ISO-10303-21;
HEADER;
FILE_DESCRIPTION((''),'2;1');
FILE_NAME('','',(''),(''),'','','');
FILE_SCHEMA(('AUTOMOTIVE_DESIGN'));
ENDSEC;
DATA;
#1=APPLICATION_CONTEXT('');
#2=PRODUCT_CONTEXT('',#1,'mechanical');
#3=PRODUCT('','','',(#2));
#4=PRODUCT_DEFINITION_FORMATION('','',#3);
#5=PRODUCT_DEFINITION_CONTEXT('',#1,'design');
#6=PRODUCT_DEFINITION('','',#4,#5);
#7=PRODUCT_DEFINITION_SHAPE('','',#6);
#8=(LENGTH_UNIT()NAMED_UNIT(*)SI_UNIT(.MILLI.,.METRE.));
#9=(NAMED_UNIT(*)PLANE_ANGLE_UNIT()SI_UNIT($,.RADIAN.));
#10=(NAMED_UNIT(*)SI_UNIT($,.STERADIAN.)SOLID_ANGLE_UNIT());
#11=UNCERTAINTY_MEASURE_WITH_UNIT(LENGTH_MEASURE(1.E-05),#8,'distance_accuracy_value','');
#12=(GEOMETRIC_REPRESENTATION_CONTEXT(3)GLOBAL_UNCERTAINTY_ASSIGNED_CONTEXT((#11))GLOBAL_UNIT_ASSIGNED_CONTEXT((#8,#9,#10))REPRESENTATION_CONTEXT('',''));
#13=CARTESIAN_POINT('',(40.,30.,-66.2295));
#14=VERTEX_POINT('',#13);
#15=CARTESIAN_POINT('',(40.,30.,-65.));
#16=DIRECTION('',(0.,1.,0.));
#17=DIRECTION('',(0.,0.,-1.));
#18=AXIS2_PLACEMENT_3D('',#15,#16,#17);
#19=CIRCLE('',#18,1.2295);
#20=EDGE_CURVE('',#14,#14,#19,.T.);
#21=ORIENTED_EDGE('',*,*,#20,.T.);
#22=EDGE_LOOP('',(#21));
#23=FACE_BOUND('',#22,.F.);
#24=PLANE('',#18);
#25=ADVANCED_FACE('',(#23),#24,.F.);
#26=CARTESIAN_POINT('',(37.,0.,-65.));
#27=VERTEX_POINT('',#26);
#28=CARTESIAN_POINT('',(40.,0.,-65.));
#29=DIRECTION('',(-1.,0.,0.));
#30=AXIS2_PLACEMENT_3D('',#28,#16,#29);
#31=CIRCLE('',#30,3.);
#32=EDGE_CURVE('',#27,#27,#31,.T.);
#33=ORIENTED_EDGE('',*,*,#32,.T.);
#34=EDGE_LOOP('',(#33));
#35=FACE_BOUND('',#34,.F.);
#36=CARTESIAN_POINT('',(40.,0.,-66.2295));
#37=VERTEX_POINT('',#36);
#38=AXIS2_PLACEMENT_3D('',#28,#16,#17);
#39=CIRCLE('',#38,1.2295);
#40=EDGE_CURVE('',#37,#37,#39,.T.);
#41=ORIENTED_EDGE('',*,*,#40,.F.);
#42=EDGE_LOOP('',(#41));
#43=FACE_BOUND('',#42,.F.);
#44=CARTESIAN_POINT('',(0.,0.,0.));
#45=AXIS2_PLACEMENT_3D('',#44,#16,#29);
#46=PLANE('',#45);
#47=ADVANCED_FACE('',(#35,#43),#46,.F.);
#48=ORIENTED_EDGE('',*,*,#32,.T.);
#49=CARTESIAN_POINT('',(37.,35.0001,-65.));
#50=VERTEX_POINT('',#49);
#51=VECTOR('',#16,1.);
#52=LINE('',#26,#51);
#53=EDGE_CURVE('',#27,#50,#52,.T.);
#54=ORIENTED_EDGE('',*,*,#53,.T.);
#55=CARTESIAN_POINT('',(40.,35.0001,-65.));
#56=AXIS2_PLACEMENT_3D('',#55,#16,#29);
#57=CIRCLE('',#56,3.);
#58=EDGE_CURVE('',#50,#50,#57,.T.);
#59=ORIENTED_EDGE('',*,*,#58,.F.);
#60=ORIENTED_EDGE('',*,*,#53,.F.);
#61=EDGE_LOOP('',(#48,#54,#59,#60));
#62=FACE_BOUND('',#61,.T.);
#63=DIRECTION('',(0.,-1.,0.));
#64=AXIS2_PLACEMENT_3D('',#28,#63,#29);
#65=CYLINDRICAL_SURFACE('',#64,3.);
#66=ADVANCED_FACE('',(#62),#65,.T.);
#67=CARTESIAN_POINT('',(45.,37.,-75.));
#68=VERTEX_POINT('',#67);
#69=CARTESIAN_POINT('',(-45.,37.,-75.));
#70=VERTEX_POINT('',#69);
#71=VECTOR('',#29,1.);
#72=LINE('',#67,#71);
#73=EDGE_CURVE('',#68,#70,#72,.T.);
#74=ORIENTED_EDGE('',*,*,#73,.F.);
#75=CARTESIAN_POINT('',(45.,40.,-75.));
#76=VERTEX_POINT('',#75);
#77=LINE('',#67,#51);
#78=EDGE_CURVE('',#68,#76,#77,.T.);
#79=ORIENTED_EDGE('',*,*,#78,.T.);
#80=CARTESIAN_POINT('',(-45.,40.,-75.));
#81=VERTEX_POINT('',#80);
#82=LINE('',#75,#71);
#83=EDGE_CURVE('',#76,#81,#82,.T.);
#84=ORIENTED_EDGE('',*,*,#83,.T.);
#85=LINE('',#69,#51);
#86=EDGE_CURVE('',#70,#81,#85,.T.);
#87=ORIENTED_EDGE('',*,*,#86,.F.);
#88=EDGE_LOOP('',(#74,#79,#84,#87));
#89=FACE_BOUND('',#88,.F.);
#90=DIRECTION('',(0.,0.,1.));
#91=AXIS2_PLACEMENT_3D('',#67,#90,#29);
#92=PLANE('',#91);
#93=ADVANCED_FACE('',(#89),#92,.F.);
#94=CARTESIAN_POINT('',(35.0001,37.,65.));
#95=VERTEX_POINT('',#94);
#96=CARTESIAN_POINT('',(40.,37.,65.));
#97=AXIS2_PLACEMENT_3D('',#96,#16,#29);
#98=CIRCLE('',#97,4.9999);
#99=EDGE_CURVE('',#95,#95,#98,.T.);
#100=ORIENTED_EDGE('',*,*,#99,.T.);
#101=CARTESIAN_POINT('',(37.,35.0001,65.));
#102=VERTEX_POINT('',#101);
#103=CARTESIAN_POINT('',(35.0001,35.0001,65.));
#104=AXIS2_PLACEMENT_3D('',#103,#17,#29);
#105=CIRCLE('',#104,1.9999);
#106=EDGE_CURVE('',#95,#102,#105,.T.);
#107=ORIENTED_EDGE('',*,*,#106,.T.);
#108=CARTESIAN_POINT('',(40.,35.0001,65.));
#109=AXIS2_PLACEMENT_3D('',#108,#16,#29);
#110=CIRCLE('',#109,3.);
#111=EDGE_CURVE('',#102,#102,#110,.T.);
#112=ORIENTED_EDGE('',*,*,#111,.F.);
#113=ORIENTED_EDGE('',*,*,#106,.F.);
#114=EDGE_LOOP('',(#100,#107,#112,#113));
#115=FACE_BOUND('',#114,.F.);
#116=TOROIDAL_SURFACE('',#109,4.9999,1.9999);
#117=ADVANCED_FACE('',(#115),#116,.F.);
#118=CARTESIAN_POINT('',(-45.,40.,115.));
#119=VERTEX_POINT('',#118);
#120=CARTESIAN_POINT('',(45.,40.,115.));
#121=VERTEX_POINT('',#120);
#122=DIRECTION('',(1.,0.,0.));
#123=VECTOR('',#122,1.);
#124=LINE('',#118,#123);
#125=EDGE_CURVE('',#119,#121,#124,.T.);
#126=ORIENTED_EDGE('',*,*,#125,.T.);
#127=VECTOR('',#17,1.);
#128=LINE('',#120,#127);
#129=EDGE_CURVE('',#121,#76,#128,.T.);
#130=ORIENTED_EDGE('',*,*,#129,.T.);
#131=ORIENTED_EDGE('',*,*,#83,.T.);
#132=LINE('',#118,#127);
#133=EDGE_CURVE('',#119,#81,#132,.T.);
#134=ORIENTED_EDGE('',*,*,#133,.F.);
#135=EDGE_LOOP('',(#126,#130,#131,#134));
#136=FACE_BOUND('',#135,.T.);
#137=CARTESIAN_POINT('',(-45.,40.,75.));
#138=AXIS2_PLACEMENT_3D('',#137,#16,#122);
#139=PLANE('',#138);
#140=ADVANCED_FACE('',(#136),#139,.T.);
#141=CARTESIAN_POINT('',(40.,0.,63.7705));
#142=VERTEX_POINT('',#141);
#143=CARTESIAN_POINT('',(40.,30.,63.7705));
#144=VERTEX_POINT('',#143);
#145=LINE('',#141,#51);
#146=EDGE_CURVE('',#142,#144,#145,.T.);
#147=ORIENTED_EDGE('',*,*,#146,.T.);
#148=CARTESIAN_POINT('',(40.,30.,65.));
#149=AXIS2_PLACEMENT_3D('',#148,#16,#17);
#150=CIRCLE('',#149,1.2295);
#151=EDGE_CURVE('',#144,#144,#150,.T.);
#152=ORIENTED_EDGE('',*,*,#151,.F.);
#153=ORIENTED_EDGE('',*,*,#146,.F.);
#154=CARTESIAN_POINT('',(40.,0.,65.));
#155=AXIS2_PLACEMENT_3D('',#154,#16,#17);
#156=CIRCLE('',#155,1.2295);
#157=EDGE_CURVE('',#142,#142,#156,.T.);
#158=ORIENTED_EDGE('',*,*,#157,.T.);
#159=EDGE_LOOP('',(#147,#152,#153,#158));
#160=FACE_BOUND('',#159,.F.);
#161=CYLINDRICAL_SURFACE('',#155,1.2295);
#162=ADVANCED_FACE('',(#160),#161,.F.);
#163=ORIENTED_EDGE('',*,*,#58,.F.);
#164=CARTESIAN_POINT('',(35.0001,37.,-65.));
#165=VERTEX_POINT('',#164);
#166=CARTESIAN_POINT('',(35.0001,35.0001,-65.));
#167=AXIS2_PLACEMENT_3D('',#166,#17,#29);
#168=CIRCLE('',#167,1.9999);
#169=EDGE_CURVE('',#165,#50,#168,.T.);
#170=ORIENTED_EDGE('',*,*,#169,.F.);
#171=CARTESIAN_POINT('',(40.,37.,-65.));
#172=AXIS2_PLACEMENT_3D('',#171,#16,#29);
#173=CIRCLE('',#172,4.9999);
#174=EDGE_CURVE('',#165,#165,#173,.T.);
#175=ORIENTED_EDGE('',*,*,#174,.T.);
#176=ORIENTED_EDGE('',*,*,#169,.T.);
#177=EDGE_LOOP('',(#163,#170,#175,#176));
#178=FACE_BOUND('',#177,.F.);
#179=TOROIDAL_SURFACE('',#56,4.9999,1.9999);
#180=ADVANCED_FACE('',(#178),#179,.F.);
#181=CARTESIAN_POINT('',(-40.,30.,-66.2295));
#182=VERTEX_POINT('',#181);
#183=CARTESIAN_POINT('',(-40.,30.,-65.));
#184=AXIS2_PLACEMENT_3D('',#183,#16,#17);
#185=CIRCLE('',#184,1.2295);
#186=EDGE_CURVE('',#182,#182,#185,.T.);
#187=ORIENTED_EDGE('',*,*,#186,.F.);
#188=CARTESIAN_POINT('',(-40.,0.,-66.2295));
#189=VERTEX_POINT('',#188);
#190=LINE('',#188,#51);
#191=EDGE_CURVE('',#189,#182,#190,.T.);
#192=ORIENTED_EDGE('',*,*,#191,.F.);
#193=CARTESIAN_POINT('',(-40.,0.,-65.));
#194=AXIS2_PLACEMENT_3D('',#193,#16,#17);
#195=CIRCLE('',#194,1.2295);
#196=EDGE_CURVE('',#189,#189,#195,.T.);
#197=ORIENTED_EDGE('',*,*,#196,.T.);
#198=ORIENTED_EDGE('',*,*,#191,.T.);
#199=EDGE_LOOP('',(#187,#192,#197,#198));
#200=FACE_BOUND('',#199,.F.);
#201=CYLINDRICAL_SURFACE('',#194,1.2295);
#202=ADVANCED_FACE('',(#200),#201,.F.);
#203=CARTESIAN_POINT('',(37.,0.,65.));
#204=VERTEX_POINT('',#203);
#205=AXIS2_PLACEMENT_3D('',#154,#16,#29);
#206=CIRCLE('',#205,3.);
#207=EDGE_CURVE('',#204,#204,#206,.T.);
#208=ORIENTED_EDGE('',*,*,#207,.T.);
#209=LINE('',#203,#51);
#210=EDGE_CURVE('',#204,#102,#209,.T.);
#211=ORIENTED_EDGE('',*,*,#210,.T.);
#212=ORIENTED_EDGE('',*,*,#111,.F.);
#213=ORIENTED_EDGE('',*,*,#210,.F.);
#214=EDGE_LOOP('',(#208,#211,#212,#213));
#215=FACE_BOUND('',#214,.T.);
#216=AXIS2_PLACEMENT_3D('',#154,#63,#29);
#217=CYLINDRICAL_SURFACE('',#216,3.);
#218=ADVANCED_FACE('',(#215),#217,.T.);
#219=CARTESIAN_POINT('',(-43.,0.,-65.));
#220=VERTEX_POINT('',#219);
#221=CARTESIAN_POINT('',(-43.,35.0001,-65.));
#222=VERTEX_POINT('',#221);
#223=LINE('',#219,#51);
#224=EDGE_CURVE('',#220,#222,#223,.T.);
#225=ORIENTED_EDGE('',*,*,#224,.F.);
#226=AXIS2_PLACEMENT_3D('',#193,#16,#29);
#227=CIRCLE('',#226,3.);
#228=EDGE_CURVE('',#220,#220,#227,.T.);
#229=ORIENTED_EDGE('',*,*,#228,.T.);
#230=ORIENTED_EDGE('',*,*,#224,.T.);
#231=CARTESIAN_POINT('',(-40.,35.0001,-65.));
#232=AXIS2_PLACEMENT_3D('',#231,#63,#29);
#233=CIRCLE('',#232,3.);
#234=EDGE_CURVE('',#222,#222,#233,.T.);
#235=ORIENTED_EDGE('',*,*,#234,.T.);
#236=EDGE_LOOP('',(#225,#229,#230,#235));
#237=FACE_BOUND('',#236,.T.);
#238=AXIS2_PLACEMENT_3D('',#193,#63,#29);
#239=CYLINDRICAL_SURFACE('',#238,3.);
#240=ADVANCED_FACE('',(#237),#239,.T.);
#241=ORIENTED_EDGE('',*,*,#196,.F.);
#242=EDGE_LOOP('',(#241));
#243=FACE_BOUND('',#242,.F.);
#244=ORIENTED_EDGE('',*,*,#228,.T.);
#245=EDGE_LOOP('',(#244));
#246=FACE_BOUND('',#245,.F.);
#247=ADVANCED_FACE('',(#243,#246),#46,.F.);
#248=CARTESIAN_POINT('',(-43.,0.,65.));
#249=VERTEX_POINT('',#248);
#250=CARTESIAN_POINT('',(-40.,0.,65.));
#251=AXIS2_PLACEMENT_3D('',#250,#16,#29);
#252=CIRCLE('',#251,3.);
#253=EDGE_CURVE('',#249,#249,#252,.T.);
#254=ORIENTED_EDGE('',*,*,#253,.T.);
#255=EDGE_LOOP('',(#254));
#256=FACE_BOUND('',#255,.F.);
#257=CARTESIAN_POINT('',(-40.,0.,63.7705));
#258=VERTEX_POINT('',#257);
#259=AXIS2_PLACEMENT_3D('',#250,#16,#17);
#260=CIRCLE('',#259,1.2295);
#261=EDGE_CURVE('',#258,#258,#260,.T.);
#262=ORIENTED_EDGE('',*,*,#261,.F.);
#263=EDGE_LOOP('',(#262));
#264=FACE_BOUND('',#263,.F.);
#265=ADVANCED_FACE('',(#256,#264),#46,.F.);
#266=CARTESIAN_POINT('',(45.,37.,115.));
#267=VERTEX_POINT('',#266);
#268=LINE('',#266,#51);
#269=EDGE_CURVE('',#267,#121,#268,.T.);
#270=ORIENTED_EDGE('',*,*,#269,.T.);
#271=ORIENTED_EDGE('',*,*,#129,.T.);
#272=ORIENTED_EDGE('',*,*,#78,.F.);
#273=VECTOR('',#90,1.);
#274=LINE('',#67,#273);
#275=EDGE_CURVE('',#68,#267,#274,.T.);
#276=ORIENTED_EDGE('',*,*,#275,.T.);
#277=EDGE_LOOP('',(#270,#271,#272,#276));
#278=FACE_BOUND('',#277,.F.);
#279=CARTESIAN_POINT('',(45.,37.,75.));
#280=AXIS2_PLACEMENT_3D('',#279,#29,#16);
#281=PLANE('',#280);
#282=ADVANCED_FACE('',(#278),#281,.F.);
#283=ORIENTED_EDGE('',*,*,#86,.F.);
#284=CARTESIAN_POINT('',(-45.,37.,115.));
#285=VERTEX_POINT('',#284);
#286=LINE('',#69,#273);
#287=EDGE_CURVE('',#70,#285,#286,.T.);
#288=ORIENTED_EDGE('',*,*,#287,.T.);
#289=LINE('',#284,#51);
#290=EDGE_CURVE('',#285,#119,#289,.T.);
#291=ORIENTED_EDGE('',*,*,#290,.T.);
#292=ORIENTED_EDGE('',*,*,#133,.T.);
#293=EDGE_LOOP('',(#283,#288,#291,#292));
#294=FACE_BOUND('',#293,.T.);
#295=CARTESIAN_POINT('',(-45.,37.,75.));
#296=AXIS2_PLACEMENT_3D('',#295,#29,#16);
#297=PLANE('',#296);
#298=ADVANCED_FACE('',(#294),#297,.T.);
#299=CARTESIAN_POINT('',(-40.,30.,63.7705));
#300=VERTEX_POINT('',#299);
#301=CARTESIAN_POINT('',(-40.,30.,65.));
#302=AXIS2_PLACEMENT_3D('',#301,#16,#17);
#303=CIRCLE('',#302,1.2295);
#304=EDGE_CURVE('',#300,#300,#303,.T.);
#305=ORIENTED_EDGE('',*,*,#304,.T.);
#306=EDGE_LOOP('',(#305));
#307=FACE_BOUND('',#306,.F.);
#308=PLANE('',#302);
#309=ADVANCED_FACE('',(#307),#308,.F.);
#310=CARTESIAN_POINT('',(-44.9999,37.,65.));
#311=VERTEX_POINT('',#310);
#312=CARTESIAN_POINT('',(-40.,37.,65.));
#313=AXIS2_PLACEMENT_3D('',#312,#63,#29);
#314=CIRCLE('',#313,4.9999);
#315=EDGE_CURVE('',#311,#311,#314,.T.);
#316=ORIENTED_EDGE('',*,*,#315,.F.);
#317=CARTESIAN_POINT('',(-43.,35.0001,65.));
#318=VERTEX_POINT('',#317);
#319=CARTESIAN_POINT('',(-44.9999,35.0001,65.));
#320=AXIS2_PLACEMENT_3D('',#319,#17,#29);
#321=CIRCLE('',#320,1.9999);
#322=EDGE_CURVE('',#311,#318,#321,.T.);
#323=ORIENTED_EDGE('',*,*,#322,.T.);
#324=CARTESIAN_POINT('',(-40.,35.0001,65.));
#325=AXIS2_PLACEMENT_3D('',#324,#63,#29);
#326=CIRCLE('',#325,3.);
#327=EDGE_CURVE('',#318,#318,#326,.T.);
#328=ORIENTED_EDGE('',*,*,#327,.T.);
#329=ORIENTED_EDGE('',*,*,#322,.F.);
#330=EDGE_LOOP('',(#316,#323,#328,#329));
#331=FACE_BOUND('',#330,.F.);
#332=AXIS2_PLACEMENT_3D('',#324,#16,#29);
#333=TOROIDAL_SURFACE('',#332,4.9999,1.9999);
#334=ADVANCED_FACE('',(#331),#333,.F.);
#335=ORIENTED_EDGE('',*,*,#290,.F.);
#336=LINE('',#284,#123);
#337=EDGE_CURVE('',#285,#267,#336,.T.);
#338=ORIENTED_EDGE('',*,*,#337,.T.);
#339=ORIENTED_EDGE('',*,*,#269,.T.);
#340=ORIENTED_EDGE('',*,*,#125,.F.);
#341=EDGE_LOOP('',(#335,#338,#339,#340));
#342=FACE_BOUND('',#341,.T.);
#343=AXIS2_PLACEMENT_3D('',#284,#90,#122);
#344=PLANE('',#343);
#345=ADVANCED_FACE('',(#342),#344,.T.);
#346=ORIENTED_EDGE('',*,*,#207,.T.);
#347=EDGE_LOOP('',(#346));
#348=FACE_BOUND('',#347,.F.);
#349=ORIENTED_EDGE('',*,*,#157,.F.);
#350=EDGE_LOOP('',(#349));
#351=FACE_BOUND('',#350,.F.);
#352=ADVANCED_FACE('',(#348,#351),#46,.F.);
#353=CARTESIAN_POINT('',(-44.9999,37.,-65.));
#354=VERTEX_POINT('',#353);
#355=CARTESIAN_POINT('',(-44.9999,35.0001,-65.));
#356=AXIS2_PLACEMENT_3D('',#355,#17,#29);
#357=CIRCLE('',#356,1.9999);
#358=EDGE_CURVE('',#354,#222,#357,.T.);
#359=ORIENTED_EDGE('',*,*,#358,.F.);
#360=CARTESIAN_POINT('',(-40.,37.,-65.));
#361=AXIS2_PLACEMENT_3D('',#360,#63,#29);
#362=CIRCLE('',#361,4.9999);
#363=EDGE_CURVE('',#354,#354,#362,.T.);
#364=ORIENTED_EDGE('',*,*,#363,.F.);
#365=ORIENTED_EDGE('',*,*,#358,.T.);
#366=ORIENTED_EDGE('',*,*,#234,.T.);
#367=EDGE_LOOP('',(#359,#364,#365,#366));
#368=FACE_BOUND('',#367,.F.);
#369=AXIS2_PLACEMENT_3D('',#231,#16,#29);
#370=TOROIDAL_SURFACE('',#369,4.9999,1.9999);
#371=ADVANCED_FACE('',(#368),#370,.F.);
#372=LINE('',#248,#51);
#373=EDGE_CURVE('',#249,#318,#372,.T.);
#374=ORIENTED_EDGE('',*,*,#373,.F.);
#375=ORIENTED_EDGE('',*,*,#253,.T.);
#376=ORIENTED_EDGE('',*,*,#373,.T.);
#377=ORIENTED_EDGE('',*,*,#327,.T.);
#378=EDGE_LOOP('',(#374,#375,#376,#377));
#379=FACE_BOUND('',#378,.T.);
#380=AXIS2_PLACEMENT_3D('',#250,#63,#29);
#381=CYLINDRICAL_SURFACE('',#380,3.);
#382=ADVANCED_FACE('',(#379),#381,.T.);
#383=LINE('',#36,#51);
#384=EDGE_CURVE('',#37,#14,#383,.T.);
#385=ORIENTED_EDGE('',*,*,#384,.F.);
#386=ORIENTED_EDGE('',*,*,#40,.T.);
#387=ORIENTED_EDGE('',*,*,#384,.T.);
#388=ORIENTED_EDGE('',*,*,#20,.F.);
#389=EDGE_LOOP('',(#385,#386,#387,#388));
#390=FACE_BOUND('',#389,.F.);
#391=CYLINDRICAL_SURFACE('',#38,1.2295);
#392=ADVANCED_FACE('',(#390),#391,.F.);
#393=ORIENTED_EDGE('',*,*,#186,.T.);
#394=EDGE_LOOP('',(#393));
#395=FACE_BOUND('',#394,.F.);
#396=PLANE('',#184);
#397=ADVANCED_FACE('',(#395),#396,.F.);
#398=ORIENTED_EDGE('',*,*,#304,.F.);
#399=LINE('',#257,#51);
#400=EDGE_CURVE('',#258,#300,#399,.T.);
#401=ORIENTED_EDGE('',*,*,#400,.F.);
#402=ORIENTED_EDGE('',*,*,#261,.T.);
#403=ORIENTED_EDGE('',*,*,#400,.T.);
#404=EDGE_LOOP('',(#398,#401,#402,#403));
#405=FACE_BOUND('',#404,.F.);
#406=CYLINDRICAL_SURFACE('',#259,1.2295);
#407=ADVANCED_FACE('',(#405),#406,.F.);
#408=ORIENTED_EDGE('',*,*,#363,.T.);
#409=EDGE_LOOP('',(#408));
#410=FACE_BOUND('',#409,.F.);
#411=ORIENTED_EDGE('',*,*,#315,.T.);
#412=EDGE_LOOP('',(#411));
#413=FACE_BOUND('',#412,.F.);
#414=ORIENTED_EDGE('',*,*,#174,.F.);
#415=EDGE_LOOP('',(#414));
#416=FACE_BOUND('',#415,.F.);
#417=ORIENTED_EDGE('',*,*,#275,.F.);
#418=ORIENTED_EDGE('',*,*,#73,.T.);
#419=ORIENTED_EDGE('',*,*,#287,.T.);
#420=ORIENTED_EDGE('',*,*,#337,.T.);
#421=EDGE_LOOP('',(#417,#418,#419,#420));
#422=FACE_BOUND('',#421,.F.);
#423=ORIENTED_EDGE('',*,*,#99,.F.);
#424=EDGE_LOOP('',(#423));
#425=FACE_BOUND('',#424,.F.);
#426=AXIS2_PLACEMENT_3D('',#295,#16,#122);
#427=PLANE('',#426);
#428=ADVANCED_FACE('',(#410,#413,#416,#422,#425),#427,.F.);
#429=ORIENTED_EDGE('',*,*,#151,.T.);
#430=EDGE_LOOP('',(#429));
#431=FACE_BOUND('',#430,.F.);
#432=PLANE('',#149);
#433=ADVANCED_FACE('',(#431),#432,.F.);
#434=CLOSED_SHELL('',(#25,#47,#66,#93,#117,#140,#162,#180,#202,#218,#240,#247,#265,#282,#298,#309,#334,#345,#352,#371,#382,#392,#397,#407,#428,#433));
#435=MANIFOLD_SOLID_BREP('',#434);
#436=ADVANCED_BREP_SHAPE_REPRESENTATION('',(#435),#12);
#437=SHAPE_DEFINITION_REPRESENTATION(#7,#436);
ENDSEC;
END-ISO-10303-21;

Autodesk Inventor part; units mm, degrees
ref_plane "YZ Plane" through (0, 0, 0) normal (1, 0, 0) x (0, 1, 0)
ref_plane "XZ Plane" through (0, 0, 0) normal (0, 1, 0) x (-1, 0, 0)
ref_plane "XY Plane" through (0, 0, 0) normal (0, 0, 1) x (1, 0, 0)
sketch "Esquisse1" plane through (0, 0, 0) normal (0, 1, 0) x (-1, 0, 0)
  line L0 (0, 0) -> (0, 65)
  line L1 (0, 0) -> (0, -65)
  line L2 (0, 65) -> (40, 65)
  line L3 (-40, -65) -> (40, -65)
  circle A0 centre (40, 65) radius 3
  circle A1 centre (40, -65) radius 3
  circle A2 centre (-40, -65) radius 3
  line L4 (0, 65) -> (-40, 65)
  circle A3 centre (-40, 65) radius 3
  dimension "d0" = 65
  dimension "d1" = 65
  dimension "d2" = 40
  dimension "d4" = 80
  dimension "d5" = 6
  dimension "d7" = 6
  dimension "d9" = 6
  dimension "d11" = 40
  dimension "d12" = 6
extrude "Extrusion1" add sketch "Esquisse1" along normal blind 37
sketch "Esquisse2" plane through (-40, 37, 65) normal (0, 1, 0) x (1, 0, 0)
  line L0 (0, 0) -> (80, 0)
  line L1 (80, 0) -> (80, 130)
  line L2 (80, 130) -> (0, 130)
  line L3 (0, 130) -> (0, 0)
  line L4 (0, 0) -> (0, -10)
  line L5 (0, -10) -> (85, -10)
  line L6 (85, -10) -> (85, 140)
  line L7 (85, 140) -> (-5, 140)
  line L8 (-5, 140) -> (-5, -10)
  line L9 (-5, -10) -> (0, -10)
  point P0 (40, 65)
  dimension "d16" = 80
  dimension "d17" = 130
  dimension "d18" = 10
  dimension "d19" = 85
  dimension "d20" = 150
  dimension "d21" = 90
extrude "Extrusion2" add sketch "Esquisse2" along normal blind 3 contours L3 L2 L1 L0 | L9 L8 L7 L6 L5
sketch "Esquisse3" plane through (40, 0, 65) normal (0, -1, 0) x (1, 0, 0)
  circle A0 centre (0, -130) radius 3 projected
  circle A1 centre (-80, 0) radius 3 projected
  circle A2 centre (-80, -130) radius 3 projected
  point P0 (-40, -65)
  point P1 (0, 0)
hole "Perçage1" at (40, 0, 65) at (40, 0, -65) at (-40, 0, 65) at (-40, 0, -65) direction (0, 1, 0) diameter 2.459 depth 30 thread size "M3x0.5" class "6H" standard "ISO Metric profile"
sketch "Esquisse4" plane through (-45, 37, 75) normal (0, 0, 1) x (1, 0, 0)
  line L0 (0, 0) -> (90, 0) projected
  line L1 (90, 0) -> (90, 3) projected
  line L2 (0, 3) -> (90, 3) projected
  line L3 (0, 0) -> (0, 3) projected
  point P0 (45, -37)
extrude "Extrusion3" add sketch "Esquisse4" along normal blind 40
fillet "Congé1" radius 2 4 edges at (-37, 37, 65) (43, 37, 65) (43, 37, -65) (-37, 37, -65)
properties part number "Support intérieur châssis"
